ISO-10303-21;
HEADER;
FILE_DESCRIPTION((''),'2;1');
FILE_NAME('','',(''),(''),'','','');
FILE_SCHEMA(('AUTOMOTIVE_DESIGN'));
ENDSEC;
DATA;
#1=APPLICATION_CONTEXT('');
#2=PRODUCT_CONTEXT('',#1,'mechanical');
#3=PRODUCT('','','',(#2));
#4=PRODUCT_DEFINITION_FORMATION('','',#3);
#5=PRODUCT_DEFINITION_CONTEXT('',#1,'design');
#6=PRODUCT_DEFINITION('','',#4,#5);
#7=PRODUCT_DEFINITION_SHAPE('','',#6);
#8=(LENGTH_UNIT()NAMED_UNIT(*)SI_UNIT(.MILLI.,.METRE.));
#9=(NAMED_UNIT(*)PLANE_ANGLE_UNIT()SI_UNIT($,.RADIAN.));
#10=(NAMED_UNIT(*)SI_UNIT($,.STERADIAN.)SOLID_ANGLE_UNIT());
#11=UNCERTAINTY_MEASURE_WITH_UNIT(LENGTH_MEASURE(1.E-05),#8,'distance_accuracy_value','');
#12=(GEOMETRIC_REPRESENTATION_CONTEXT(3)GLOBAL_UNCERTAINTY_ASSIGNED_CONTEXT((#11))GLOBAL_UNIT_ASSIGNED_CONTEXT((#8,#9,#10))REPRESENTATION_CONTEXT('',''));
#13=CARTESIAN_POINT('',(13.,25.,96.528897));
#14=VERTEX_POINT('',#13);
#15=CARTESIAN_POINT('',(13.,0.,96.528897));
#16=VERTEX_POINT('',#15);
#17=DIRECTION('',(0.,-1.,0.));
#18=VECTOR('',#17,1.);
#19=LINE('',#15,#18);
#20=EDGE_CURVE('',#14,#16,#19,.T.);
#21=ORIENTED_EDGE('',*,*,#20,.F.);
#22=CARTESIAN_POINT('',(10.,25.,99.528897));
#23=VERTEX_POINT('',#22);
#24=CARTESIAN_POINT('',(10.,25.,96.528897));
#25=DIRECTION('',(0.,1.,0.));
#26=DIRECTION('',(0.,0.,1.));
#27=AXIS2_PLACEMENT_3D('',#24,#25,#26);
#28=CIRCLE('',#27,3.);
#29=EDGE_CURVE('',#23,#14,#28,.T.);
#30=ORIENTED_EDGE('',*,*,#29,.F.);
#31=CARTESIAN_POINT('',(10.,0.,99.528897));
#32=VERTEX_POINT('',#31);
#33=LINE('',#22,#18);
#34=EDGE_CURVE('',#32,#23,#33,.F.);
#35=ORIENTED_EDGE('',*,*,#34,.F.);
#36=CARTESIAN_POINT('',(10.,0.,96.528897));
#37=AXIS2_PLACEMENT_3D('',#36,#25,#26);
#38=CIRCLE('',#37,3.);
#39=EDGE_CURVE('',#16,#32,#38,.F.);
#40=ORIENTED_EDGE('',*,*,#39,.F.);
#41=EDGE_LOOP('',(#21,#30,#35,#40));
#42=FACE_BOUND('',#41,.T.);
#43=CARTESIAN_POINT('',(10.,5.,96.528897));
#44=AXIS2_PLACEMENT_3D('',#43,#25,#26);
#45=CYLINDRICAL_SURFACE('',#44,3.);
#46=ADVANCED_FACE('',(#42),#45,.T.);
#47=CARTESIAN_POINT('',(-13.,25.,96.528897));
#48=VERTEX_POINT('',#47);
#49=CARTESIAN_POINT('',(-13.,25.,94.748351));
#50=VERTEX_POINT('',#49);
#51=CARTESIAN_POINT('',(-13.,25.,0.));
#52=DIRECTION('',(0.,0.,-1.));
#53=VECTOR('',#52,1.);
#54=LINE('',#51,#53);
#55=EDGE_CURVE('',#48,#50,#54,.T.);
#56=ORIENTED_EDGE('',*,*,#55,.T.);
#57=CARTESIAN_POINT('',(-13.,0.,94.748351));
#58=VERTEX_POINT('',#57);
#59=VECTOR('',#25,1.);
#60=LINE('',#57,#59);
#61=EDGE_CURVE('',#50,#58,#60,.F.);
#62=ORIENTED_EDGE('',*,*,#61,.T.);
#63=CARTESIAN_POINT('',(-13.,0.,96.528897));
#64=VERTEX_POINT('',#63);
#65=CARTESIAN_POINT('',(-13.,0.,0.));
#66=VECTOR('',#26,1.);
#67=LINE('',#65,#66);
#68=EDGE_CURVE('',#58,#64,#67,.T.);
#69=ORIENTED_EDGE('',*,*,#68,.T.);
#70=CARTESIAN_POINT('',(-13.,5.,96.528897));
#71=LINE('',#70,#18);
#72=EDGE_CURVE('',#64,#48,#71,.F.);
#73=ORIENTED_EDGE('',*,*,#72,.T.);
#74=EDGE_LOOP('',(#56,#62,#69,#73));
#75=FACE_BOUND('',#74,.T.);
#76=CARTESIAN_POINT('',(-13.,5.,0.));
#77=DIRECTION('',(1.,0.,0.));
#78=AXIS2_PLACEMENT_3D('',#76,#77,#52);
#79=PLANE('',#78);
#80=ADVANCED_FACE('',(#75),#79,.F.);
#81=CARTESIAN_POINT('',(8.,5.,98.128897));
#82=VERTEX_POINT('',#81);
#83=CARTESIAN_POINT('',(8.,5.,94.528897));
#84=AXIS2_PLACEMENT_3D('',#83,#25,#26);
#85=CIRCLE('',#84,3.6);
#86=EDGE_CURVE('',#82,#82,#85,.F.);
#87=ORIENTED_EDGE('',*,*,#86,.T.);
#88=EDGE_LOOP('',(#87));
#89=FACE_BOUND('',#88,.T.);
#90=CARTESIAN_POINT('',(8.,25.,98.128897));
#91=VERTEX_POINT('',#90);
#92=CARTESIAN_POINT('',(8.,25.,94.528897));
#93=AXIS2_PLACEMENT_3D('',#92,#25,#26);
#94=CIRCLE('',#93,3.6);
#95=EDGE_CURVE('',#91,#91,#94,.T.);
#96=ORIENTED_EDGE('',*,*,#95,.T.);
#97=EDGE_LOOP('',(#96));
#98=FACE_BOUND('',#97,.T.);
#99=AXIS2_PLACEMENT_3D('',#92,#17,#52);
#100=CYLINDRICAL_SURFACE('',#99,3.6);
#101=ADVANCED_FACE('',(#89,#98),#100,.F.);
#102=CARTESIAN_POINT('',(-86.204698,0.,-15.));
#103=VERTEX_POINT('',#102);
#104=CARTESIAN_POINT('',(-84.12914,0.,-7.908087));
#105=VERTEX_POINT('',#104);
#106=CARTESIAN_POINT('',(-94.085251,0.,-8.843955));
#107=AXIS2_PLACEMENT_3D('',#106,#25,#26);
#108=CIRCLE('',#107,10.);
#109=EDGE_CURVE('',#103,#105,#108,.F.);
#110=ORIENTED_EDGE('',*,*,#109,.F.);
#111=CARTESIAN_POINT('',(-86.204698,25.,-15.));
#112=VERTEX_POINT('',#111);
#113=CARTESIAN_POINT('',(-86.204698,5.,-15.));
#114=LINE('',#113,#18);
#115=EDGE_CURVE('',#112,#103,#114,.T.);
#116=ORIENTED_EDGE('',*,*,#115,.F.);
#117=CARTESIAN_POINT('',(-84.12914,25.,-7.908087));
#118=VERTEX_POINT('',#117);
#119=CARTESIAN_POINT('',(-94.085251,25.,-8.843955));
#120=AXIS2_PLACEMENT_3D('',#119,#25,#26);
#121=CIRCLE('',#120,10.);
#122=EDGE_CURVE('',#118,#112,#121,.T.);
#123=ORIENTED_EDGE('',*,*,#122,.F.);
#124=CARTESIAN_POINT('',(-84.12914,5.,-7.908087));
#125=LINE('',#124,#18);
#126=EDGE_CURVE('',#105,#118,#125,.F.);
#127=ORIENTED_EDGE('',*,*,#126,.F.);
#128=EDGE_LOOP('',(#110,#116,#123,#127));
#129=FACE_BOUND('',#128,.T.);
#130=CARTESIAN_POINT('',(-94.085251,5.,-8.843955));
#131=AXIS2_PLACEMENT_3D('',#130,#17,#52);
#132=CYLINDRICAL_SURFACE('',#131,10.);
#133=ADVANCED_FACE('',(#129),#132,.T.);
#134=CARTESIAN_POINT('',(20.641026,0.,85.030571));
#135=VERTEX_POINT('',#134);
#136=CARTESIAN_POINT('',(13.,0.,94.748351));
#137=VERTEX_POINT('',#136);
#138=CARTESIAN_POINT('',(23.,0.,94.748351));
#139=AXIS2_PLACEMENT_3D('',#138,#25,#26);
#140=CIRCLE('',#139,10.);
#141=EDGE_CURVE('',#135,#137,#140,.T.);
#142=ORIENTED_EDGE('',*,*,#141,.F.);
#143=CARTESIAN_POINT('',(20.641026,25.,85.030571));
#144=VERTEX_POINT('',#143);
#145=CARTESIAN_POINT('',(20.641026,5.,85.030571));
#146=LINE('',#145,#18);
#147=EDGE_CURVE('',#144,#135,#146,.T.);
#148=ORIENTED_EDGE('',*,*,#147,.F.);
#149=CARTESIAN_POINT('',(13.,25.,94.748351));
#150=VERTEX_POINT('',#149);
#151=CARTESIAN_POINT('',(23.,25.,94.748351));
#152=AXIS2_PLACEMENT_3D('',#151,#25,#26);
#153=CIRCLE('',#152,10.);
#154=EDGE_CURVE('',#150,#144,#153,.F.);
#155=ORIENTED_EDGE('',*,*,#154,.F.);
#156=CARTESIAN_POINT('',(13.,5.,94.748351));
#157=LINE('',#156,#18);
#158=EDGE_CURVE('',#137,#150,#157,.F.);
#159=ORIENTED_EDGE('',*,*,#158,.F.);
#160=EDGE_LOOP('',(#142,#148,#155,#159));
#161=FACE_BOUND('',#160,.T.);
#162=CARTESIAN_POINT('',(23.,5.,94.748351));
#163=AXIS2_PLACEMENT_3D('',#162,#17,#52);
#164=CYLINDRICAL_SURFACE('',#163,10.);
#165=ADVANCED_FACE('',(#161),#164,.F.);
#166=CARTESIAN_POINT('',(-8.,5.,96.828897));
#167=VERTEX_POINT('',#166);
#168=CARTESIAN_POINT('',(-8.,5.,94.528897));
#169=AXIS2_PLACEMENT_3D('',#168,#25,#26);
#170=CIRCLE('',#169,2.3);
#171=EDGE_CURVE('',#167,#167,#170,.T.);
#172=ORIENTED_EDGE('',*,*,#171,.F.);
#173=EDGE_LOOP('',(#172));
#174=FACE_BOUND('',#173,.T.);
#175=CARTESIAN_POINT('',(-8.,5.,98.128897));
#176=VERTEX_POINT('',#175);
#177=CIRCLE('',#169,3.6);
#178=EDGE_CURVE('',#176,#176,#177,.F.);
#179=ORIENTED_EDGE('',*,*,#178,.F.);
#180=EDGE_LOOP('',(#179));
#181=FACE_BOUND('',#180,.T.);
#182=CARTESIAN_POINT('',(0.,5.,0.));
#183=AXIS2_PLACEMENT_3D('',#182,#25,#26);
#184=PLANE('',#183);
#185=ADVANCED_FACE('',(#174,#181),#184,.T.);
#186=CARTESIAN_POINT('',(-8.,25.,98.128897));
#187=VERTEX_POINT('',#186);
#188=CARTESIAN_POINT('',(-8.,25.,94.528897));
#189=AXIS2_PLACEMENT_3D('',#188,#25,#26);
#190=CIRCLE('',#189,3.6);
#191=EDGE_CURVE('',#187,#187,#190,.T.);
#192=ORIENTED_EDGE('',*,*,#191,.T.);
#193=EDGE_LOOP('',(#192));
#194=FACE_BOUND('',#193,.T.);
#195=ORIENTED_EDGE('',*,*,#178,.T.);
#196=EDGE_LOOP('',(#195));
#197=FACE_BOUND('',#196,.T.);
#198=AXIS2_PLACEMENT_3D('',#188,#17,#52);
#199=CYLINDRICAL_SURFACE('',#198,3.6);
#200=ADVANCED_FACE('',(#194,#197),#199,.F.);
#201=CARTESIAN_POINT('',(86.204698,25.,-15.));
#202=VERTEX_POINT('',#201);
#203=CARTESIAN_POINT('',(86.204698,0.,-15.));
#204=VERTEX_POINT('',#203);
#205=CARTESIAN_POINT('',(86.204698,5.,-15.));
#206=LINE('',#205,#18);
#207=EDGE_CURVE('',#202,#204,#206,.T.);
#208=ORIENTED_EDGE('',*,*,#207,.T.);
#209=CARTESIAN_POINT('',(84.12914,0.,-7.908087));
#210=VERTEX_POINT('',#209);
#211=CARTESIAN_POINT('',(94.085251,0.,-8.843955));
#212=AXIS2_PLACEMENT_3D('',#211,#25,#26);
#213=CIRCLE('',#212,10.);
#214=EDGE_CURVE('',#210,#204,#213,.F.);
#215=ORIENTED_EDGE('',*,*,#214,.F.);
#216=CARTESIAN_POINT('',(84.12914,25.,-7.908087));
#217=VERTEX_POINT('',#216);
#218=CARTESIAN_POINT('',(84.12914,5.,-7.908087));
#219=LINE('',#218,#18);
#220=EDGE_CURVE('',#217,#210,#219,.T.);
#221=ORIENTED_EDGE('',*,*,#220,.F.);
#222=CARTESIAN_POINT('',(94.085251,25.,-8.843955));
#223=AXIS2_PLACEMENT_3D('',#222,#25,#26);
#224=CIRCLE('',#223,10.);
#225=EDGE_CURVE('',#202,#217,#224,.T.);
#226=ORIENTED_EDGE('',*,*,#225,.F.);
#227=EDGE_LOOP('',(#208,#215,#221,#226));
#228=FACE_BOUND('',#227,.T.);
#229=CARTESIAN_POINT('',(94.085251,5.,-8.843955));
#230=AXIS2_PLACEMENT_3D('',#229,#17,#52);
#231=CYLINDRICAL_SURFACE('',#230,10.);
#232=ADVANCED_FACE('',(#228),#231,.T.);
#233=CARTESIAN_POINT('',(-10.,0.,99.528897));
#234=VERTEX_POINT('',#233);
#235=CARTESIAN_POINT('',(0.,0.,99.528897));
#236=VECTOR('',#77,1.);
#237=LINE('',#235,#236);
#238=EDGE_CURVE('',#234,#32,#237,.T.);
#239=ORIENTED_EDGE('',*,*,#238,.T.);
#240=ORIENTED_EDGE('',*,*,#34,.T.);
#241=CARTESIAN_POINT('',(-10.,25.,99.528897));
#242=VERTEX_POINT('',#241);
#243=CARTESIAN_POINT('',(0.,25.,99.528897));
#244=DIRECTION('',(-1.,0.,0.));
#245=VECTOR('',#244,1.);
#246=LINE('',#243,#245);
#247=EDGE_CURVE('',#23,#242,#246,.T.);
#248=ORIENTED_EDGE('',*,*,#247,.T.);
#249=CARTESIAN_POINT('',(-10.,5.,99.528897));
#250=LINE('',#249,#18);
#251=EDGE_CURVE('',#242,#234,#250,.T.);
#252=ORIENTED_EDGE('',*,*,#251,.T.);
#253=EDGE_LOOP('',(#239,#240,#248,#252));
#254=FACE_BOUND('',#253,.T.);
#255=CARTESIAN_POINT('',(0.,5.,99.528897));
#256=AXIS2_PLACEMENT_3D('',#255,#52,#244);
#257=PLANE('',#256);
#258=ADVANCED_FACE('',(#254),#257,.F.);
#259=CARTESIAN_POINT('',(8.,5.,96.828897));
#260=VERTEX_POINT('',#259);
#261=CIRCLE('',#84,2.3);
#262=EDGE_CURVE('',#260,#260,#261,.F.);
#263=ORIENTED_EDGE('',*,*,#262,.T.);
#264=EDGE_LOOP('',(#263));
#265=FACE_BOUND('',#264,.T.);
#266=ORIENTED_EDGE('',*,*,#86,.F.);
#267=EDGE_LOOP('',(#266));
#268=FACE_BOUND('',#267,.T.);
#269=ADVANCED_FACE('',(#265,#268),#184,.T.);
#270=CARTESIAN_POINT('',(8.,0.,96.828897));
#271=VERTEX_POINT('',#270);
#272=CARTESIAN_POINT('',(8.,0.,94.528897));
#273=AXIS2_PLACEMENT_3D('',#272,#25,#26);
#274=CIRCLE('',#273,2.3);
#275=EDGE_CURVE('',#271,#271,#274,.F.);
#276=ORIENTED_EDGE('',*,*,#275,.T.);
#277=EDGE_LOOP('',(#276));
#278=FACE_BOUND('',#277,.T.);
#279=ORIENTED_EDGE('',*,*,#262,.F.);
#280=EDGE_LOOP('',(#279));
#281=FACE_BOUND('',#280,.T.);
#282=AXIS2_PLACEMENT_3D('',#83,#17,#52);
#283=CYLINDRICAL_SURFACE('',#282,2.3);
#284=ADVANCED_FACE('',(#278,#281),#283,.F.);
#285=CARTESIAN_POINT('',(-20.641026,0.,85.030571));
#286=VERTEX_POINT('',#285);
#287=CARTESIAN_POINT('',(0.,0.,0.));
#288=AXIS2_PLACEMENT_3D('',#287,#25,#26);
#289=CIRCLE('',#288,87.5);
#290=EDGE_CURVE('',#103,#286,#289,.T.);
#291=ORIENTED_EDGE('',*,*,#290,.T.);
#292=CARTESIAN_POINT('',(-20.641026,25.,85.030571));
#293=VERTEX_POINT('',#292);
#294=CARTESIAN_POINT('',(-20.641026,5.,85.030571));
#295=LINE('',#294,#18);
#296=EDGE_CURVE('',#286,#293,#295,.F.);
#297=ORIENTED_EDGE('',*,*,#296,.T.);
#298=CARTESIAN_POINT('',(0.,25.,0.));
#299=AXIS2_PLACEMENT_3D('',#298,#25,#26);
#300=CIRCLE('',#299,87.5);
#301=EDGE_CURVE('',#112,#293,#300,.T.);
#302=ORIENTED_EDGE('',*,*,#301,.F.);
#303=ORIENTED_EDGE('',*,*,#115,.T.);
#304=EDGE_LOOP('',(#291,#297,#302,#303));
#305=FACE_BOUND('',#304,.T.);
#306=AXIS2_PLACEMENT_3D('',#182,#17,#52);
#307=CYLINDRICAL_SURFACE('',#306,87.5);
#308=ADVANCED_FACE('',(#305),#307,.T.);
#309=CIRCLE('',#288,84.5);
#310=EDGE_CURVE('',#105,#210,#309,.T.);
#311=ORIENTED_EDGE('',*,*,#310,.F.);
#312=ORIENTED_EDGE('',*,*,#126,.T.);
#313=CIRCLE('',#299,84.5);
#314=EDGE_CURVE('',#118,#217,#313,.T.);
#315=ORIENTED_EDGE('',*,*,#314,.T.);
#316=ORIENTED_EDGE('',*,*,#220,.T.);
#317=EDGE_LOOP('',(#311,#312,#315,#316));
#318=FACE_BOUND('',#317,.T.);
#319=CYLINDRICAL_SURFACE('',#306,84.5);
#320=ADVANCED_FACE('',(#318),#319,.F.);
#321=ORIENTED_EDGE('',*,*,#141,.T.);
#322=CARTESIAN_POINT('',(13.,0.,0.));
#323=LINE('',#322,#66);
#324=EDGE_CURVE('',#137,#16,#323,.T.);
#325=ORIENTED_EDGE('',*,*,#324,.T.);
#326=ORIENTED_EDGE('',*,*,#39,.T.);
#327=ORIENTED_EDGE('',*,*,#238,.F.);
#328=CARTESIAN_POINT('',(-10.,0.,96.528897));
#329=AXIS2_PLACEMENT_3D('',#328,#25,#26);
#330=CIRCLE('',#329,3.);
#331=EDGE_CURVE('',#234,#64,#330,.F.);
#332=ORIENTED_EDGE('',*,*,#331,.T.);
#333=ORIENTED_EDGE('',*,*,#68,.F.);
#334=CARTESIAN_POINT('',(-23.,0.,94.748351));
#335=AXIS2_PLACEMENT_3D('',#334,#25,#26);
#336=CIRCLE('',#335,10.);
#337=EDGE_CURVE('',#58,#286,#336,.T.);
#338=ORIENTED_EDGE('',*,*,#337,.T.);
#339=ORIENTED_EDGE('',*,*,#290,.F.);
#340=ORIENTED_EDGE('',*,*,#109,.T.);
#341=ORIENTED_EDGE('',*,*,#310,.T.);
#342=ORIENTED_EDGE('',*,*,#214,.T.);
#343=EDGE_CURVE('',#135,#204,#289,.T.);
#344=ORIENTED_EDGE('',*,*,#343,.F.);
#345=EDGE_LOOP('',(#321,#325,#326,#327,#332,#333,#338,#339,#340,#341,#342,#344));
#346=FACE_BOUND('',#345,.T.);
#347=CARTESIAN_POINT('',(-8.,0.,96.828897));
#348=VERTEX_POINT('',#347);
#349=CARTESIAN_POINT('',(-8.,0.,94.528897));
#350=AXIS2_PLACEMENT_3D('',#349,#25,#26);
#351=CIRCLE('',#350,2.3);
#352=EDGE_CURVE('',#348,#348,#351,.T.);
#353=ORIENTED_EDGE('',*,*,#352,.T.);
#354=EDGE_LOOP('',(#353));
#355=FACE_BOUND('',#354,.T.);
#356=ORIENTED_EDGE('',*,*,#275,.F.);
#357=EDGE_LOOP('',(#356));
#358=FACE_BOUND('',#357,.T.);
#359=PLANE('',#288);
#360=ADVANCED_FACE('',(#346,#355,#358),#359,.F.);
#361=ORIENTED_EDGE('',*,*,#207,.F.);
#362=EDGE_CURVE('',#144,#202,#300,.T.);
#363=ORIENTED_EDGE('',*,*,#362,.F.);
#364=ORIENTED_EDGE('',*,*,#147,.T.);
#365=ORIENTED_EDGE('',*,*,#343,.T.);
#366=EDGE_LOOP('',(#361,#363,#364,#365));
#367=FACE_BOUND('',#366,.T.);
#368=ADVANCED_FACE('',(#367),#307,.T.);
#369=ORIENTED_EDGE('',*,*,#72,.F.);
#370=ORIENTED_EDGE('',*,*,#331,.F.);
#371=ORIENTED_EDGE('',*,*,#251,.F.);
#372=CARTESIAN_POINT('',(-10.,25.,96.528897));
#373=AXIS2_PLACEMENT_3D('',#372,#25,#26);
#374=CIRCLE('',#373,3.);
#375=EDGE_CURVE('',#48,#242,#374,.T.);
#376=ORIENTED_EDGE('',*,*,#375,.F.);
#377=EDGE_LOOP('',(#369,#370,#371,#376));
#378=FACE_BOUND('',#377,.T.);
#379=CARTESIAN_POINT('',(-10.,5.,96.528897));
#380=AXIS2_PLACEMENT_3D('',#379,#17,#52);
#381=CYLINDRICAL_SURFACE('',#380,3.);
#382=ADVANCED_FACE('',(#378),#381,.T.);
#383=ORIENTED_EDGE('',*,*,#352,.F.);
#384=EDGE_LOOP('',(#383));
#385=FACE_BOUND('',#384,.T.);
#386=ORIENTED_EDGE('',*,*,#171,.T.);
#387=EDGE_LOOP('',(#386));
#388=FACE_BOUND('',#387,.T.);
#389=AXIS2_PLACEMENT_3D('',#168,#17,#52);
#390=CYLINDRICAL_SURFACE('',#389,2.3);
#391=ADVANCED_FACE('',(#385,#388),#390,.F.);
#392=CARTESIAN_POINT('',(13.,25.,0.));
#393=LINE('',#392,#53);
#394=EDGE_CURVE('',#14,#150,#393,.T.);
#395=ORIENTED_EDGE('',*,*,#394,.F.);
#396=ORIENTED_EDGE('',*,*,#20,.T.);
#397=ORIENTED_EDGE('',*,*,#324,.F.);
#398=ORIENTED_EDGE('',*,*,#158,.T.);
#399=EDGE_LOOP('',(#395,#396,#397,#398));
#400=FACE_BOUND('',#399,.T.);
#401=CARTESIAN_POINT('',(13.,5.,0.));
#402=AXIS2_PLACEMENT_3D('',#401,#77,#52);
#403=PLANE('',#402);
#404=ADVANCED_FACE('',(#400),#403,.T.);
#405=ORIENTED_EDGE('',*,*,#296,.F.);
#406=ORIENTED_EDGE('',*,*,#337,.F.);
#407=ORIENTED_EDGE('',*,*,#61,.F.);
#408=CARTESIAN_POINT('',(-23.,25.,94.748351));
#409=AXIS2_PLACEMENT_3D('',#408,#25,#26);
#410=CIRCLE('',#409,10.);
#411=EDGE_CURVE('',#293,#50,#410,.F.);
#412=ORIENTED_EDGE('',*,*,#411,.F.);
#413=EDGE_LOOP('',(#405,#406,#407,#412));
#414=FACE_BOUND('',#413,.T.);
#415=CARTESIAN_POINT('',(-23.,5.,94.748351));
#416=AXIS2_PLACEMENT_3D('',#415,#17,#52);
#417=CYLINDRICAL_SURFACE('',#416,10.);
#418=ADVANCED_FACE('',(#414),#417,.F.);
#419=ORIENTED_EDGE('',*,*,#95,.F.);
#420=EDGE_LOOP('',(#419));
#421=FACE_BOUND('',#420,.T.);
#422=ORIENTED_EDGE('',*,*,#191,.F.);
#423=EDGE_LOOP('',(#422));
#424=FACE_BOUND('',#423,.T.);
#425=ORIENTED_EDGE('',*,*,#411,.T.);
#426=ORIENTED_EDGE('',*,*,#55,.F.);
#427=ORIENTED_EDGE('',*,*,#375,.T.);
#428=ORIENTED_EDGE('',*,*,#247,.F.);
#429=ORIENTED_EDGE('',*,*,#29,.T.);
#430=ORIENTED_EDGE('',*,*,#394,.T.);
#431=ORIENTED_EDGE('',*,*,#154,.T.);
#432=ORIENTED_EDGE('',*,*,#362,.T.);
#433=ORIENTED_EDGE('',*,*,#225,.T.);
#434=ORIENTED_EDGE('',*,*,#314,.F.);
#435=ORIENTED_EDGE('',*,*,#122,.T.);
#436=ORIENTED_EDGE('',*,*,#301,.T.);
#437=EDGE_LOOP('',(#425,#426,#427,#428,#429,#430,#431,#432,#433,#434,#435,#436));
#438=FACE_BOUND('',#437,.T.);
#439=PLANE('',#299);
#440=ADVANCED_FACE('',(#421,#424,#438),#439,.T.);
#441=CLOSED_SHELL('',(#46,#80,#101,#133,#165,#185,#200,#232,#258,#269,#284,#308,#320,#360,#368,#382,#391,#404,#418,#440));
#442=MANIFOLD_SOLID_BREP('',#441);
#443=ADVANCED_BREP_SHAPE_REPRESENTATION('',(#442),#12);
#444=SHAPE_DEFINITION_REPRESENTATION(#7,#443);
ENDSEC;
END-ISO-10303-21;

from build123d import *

# Parameters (mm, degrees)
SKETCH_1_R      = 3.6
SKETCH_1_R_2    = 2.3
EXTRUDE_1_DEPTH = 5
EXTRUDE_START   = 5
SKETCH_1_8_R    = 3.6
EXTRUDE_2_DEPTH = 20
FILLET_2_R      = 10
FILLET_3_R      = 3


with BuildPart() as part:
    # 草图1 → 凸台-拉伸1 (new body)
    # profile 1 of 5: a face of its own
    with BuildSketch(Plane(origin=(0, 0, 5), x_dir=(1, 0, 0), z_dir=(0, 1, 0))):
        with BuildLine():
            ThreePointArc((13, -81.528896907), (0, -82.5), (-13, -81.528896907))
            Line((-13, -81.528896907), (-13, -94.528896907))
            Line((-13, -94.528896907), (13, -94.528896907))
            Line((13, -94.528896907), (13, -81.528896907))
        make_face()
        with Locations((-8, -89.528896907)):
            Circle(SKETCH_1_R, mode=Mode.SUBTRACT)
        with Locations((8, -89.528896907)):
            Circle(SKETCH_1_R, mode=Mode.SUBTRACT)
    # profile 2 of 5: a face of its own
    with BuildSketch(Plane(origin=(0, 0, 5), x_dir=(1, 0, 0), z_dir=(0, 1, 0))):
        with BuildLine():
            ThreePointArc((-83.157982179, 20), (0, -79.5), (83.157982179, 20))
            Line((83.157982179, 20), (86.204698248, 20))
            ThreePointArc((86.204698248, 20), (0, -82.5), (-86.204698248, 20))
            Line((-86.204698248, 20), (-83.157982179, 20))
        make_face()
    # profile 3 of 5: a face of its own
    with BuildSketch(Plane(origin=(0, 0, 5), x_dir=(1, 0, 0), z_dir=(0, 1, 0))):
        with BuildLine():
            ThreePointArc((13, -81.528896907), (0, -82.5), (-13, -81.528896907))
            Line((-13, -81.528896907), (-13, -94.528896907))
            Line((-13, -94.528896907), (13, -94.528896907))
            Line((13, -94.528896907), (13, -81.528896907))
        make_face()
        with Locations((-8, -89.528896907)):
            Circle(SKETCH_1_R, mode=Mode.SUBTRACT)
        with Locations((8, -89.528896907)):
            Circle(SKETCH_1_R, mode=Mode.SUBTRACT)
    # profile 4 of 5: a face of its own
    with BuildSketch(Plane(origin=(0, 0, 5), x_dir=(1, 0, 0), z_dir=(0, 1, 0))):
        with Locations((-8, -89.528896907)):
            Circle(SKETCH_1_R)
        with Locations(Location((-8, -89.528896907, 0), (0, 0, 270))):
            Circle(SKETCH_1_R_2, mode=Mode.SUBTRACT)
    # profile 5 of 5: a face of its own
    with BuildSketch(Plane(origin=(0, 0, 5), x_dir=(1, 0, 0), z_dir=(0, 1, 0))):
        with Locations((8, -89.528896907)):
            Circle(SKETCH_1_R)
        with Locations(Location((8, -89.528896907, 0), (0, 0, 270))):
            Circle(SKETCH_1_R_2, mode=Mode.SUBTRACT)
    extrude(amount=EXTRUDE_1_DEPTH)

    # 草图1<8> → 凸台-拉伸2 (add)
    # profile 1 of 3: a face of its own
    with BuildSketch(Plane(origin=(0, 0, 5), x_dir=(1, 0, 0), z_dir=(0, 1, 0)).offset(EXTRUDE_START)):
        with BuildLine():
            ThreePointArc((13, -81.528896907), (0, -82.5), (-13, -81.528896907))
            Line((-13, -81.528896907), (-13, -94.528896907))
            Line((-13, -94.528896907), (13, -94.528896907))
            Line((13, -94.528896907), (13, -81.528896907))
        make_face()
        with Locations(Location((-8, -89.528896907, 0), (0, 0, 270))):
            Circle(SKETCH_1_8_R, mode=Mode.SUBTRACT)
        with Locations(Location((8, -89.528896907, 0), (0, 0, 270))):
            Circle(SKETCH_1_8_R, mode=Mode.SUBTRACT)
    # profile 2 of 3: a face of its own
    with BuildSketch(Plane(origin=(0, 0, 5), x_dir=(1, 0, 0), z_dir=(0, 1, 0)).offset(EXTRUDE_START)):
        with BuildLine():
            ThreePointArc((-83.157982179, 20), (0, -79.5), (83.157982179, 20))
            Line((83.157982179, 20), (86.204698248, 20))
            ThreePointArc((86.204698248, 20), (0, -82.5), (-86.204698248, 20))
            Line((-86.204698248, 20), (-83.157982179, 20))
        make_face()
    # profile 3 of 3: a face of its own
    with BuildSketch(Plane(origin=(0, 0, 5), x_dir=(1, 0, 0), z_dir=(0, 1, 0)).offset(EXTRUDE_START)):
        with BuildLine():
            ThreePointArc((13, -81.528896907), (0, -82.5), (-13, -81.528896907))
            Line((-13, -81.528896907), (-13, -94.528896907))
            Line((-13, -94.528896907), (13, -94.528896907))
            Line((13, -94.528896907), (13, -81.528896907))
        make_face()
        with Locations(Location((-8, -89.528896907, 0), (0, 0, 270))):
            Circle(SKETCH_1_8_R, mode=Mode.SUBTRACT)
        with Locations(Location((8, -89.528896907, 0), (0, 0, 270))):
            Circle(SKETCH_1_8_R, mode=Mode.SUBTRACT)
    extrude(amount=EXTRUDE_2_DEPTH)

    # 圆角2
    # the kernel refuses this fillet: 10 mm, written as the material it adds along each edge
    with BuildSketch(Plane(origin=(13, 25, 86.528896907), x_dir=(0, 0, 1), z_dir=(0, -1, 0))) as fillet_2_piece_1:
        with BuildLine():
            CenterArc((8.219454002, -10), FILLET_2_R, 90, 76.355470557)
            ThreePointArc((-1.498325579, -7.641025641), (-0.664124715, -3.837187901), (0, 0))
            Line((0, 0), (8.219454002, 0))
        make_face()
    extrude(amount=25)
    with BuildSketch(Plane(origin=(-13, 25, 86.528896907), x_dir=(-0.9813116821933555, 0, -0.1924250045884026), z_dir=(0, -1, 0))) as fillet_2_piece_2:
        with BuildLine():
            CenterArc((8.231488348, -9.990096279), FILLET_2_R, 92.550190808, 76.355470557)
            Line((-1.581628474, -8.065846233), (0, 0))
            ThreePointArc((0, 0), (3.893271516, -0.086657558), (7.786543032, 0))
        make_face()
    extrude(amount=25)
    # the kernel refuses this fillet: 10 mm, written as the material it takes off along each edge
    with BuildSketch(Plane(origin=(-83.157982179, -17.895247065, -15), x_dir=(-0.13567256273252146, 0, 0.9907537311166635), z_dir=(0, 1, 0))) as fillet_2_2_piece_1:
        with BuildLine():
            CenterArc((7.581654969, -9.991025983), FILLET_2_R, 92.427524139, 43.365844963)
            Line((0.413355777, -3.018545313), (0, 0))
            ThreePointArc((0, 0), (3.579049413, -0.075830444), (7.158098826, 0))
        make_face()
    extrude(amount=60.790494129, mode=Mode.SUBTRACT)
    with BuildSketch(Plane(origin=(83.157982179, -17.895247065, -15), x_dir=(1, 0, 0), z_dir=(0, 1, 0))) as fillet_2_2_piece_2:
        with BuildLine():
            CenterArc((10.92726883, -6.15604485), FILLET_2_R, 142.004143618, 43.365844963)
            ThreePointArc((0.971157612, -7.091913119), (0.560708101, -3.535668449), (0, 0))
            Line((0, 0), (3.046716069, 0))
        make_face()
    extrude(amount=60.790494129, mode=Mode.SUBTRACT)

    # 圆角3
    fillet_3_edges = [part.edges().sort_by_distance(p)[0] for p in [
        (13, 12.5, 99.528896907),
        (-13, 12.5, 99.528896907),
    ]]
    fillet(fillet_3_edges, radius=FILLET_3_R)


solid = part.part
